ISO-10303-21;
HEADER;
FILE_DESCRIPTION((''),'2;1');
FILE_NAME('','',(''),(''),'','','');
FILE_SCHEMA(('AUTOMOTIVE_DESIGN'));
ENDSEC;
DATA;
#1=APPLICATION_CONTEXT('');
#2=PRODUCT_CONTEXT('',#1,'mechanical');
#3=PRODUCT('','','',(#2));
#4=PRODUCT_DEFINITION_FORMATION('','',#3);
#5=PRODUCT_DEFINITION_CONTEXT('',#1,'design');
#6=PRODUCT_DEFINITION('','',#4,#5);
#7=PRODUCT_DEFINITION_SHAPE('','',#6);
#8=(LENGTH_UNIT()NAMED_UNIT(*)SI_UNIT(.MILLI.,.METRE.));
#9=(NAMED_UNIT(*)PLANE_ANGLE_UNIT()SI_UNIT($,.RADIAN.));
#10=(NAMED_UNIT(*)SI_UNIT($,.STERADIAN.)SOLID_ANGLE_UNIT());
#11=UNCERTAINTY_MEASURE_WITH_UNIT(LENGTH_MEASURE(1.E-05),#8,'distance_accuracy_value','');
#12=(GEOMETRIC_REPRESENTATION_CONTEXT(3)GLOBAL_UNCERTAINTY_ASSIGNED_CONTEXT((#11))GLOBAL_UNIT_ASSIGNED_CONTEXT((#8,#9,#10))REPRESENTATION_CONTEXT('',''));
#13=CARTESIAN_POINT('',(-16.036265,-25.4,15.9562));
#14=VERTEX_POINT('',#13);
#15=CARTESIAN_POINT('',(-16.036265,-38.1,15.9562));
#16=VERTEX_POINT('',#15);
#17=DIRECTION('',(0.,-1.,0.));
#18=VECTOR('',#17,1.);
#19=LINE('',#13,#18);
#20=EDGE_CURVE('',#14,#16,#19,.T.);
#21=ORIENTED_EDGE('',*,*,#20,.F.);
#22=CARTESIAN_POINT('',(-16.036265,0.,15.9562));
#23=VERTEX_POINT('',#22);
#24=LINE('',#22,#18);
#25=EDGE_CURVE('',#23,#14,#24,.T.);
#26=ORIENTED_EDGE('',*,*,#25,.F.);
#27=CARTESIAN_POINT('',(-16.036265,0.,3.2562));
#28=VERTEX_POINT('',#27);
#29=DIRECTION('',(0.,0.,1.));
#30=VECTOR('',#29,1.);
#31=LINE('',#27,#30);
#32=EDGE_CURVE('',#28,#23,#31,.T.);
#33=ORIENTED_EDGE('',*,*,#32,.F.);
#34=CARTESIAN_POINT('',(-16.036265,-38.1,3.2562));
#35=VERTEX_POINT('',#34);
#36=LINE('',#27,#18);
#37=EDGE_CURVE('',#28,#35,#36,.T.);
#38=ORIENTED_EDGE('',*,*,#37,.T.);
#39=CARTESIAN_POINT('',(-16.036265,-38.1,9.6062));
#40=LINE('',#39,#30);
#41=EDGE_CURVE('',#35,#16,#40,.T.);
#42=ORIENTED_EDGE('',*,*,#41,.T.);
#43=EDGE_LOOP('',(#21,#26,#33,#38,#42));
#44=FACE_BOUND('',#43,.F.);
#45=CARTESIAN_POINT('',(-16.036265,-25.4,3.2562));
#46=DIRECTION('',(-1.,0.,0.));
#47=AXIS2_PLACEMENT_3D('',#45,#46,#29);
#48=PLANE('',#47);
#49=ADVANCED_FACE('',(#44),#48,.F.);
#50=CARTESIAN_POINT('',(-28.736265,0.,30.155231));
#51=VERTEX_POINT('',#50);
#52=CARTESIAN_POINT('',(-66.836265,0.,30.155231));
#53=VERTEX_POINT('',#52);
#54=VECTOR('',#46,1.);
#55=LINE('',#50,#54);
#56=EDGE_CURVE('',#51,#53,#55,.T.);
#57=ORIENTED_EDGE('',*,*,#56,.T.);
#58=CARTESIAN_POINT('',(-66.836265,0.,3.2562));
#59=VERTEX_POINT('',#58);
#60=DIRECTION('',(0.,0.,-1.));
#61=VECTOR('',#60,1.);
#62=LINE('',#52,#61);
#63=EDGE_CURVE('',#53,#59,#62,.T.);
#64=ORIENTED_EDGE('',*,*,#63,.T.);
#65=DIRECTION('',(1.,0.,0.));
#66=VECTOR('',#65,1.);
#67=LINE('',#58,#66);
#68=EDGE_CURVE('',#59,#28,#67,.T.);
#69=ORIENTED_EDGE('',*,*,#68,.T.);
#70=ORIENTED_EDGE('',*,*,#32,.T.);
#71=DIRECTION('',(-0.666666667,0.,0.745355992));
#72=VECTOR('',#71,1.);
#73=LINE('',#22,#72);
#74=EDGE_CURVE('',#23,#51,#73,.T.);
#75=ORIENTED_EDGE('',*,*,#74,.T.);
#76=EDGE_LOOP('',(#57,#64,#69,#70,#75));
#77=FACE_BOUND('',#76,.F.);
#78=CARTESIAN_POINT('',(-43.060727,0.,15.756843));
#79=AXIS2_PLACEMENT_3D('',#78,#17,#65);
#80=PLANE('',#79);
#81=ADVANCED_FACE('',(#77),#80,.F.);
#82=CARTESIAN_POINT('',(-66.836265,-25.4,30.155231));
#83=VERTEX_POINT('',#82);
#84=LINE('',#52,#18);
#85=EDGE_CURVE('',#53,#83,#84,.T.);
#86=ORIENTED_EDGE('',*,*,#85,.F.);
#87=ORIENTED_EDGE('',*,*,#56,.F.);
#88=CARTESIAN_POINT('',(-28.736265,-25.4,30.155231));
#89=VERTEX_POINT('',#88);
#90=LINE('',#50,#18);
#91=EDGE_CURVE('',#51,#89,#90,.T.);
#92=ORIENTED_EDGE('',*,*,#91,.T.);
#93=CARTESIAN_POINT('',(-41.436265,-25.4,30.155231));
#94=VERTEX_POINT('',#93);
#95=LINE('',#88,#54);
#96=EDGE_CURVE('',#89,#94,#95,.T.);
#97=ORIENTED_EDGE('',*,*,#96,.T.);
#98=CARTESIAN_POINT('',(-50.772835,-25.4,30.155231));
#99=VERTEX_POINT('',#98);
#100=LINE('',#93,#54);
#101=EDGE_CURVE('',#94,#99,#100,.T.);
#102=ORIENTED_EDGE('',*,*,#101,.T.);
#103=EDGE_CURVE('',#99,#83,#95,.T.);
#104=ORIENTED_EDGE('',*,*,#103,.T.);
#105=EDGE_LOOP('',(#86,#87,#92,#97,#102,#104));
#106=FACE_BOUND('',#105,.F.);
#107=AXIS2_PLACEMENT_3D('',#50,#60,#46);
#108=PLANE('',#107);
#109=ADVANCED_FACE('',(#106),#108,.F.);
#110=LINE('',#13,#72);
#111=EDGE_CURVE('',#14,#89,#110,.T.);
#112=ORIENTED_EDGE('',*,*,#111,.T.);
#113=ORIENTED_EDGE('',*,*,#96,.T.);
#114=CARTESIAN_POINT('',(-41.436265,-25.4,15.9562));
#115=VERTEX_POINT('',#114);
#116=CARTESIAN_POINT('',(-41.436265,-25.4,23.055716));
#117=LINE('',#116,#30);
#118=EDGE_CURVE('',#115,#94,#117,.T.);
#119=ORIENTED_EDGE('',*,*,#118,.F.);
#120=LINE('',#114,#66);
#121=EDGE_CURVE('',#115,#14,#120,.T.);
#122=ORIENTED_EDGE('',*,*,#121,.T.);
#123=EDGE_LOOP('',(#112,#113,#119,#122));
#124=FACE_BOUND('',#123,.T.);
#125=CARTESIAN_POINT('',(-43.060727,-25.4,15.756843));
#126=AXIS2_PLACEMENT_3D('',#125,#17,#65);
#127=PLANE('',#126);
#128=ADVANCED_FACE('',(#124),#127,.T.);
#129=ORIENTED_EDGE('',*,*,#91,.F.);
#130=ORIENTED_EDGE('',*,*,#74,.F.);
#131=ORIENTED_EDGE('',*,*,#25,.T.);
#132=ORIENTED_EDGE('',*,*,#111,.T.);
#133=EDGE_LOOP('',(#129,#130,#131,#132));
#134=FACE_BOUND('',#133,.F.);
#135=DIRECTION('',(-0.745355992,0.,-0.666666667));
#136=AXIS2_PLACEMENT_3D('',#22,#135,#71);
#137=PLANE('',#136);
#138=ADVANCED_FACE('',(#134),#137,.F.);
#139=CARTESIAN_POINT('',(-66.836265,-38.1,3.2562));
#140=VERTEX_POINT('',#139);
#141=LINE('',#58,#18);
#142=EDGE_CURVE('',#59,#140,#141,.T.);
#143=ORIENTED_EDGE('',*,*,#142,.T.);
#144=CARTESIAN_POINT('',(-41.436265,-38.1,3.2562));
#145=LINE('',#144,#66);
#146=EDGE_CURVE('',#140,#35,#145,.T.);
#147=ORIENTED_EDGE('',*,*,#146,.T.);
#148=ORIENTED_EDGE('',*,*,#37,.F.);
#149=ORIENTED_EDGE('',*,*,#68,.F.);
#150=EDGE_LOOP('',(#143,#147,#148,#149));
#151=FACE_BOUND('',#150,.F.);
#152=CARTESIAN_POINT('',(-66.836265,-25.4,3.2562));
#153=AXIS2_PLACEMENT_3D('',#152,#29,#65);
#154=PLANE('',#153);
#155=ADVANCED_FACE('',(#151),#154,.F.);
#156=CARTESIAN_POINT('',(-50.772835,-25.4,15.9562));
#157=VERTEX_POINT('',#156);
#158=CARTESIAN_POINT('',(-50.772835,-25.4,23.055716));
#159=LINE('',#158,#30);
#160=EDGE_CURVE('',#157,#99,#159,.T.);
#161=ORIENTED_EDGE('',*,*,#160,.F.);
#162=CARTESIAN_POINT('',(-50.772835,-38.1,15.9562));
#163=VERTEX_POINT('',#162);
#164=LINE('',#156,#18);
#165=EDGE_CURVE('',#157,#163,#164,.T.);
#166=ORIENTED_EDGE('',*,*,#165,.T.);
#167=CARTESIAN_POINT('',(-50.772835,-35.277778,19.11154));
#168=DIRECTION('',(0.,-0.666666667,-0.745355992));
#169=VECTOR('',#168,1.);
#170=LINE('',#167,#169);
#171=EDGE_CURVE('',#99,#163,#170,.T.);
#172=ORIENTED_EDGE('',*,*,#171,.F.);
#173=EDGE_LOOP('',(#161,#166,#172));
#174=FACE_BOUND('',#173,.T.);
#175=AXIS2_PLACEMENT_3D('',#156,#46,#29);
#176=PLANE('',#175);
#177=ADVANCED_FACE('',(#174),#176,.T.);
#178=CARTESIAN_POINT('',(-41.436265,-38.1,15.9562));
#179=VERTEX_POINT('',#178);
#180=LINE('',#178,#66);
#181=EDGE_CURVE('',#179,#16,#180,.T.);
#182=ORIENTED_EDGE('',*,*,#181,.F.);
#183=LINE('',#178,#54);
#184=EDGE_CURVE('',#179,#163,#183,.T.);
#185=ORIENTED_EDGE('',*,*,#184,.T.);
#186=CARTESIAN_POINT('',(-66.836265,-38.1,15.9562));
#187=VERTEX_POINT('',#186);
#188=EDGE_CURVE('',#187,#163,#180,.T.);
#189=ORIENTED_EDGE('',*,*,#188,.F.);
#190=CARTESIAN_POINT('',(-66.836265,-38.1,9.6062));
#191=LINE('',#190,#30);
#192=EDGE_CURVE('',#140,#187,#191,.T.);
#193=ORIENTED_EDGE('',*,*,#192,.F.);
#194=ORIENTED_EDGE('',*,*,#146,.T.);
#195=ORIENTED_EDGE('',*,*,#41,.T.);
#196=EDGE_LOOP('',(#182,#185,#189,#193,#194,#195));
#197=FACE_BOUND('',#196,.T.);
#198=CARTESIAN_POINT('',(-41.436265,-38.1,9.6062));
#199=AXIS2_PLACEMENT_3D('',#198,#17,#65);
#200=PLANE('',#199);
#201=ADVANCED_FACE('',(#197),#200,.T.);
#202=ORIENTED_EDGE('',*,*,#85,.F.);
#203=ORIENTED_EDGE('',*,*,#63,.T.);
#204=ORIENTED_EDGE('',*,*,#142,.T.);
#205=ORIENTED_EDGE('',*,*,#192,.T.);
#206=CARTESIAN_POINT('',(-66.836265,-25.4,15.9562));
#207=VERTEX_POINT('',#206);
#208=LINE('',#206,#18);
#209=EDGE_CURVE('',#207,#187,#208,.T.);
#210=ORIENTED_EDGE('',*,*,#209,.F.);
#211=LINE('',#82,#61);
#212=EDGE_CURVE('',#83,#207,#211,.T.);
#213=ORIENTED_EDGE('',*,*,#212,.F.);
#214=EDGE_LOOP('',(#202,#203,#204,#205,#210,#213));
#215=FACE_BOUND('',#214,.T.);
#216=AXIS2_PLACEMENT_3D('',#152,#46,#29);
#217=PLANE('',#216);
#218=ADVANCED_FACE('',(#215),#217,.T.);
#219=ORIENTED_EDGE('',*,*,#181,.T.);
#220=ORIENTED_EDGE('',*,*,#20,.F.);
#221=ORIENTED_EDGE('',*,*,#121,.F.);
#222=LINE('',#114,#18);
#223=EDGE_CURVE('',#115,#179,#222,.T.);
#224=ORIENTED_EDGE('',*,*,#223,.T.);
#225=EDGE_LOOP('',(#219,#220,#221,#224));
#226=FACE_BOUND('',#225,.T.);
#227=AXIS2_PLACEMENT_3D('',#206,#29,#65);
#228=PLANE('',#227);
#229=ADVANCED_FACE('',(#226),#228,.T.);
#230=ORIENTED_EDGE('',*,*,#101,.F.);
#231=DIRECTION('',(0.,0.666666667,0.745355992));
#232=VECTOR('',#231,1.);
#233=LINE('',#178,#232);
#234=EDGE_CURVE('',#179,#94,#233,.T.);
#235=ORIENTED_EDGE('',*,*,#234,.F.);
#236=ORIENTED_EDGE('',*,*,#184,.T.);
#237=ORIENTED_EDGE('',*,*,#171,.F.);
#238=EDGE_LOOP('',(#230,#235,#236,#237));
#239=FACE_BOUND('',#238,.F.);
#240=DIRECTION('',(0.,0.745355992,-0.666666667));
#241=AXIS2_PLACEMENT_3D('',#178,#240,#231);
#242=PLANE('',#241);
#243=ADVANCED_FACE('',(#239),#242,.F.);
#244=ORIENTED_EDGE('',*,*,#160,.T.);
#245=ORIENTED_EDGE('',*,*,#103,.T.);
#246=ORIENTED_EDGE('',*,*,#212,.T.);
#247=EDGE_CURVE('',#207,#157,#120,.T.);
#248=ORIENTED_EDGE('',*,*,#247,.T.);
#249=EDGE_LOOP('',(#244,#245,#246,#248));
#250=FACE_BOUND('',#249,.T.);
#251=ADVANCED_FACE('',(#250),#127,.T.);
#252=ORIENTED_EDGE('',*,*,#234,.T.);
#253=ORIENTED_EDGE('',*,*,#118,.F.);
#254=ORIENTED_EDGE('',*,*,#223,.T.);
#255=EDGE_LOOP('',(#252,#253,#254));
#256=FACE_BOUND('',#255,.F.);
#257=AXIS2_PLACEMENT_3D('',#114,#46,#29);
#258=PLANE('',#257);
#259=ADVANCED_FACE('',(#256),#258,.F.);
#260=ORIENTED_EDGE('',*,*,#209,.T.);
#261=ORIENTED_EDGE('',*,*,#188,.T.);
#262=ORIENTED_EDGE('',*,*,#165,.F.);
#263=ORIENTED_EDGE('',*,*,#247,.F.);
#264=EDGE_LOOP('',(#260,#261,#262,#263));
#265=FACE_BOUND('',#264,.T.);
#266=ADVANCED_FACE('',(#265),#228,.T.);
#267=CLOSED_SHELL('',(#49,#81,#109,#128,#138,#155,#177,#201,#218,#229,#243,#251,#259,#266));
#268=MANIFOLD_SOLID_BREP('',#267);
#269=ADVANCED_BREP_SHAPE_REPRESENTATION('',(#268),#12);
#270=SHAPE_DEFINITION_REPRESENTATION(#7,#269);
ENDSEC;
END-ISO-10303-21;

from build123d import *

# Parameters (mm, degrees)
F1_DEPTH = 25.4
F2_W     = 50.8
F2_H     = 12.7
F3_DEPTH = 12.7
F4_W     = 9.3365699251
F4_H     = 14.1990316571
F5_DEPTH = 12.7
F7_DEPTH = 25.4


# Not quite as in the source:
# - a feature names something its author has since deleted; it is built from what else it names


with BuildPart() as f1:
    # F0 (on Front) → F1 (new body)
    with BuildSketch(Plane.XZ):
        Polygon((-66.8362646442, 30.1552314789), (-66.8362646442, 3.2561998218), (-16.0362646442, 3.2561998218), (-16.0362646442, 15.9561998218), (-28.7362646442, 30.1552314789), align=None)
    extrude(amount=F1_DEPTH)

    # F2 (on face) → F3 (join)
    with BuildSketch(Plane.XZ.offset(25.4)):
        with Locations((-41.4362646442, 9.6061998218)):
            Rectangle(F2_W, F2_H)
    extrude(amount=F3_DEPTH)

    # F4 (on face) → F5 (join)
    with BuildSketch(Plane.XZ.offset(25.4)):
        with Locations((-46.1045496067, 23.0557156503)):
            Rectangle(F4_W, F4_H)
    extrude(amount=F5_DEPTH)

    # F6 (on face) → F7 (cut)
    with BuildSketch(Plane.YZ.offset(-41.4362646442)):
        Polygon((-38.1, 15.9561998218), (-25.4, 30.1552314789), (-38.1, 30.1552314789), align=None)
    extrude(amount=-F7_DEPTH, mode=Mode.SUBTRACT)


solid = f1.part
